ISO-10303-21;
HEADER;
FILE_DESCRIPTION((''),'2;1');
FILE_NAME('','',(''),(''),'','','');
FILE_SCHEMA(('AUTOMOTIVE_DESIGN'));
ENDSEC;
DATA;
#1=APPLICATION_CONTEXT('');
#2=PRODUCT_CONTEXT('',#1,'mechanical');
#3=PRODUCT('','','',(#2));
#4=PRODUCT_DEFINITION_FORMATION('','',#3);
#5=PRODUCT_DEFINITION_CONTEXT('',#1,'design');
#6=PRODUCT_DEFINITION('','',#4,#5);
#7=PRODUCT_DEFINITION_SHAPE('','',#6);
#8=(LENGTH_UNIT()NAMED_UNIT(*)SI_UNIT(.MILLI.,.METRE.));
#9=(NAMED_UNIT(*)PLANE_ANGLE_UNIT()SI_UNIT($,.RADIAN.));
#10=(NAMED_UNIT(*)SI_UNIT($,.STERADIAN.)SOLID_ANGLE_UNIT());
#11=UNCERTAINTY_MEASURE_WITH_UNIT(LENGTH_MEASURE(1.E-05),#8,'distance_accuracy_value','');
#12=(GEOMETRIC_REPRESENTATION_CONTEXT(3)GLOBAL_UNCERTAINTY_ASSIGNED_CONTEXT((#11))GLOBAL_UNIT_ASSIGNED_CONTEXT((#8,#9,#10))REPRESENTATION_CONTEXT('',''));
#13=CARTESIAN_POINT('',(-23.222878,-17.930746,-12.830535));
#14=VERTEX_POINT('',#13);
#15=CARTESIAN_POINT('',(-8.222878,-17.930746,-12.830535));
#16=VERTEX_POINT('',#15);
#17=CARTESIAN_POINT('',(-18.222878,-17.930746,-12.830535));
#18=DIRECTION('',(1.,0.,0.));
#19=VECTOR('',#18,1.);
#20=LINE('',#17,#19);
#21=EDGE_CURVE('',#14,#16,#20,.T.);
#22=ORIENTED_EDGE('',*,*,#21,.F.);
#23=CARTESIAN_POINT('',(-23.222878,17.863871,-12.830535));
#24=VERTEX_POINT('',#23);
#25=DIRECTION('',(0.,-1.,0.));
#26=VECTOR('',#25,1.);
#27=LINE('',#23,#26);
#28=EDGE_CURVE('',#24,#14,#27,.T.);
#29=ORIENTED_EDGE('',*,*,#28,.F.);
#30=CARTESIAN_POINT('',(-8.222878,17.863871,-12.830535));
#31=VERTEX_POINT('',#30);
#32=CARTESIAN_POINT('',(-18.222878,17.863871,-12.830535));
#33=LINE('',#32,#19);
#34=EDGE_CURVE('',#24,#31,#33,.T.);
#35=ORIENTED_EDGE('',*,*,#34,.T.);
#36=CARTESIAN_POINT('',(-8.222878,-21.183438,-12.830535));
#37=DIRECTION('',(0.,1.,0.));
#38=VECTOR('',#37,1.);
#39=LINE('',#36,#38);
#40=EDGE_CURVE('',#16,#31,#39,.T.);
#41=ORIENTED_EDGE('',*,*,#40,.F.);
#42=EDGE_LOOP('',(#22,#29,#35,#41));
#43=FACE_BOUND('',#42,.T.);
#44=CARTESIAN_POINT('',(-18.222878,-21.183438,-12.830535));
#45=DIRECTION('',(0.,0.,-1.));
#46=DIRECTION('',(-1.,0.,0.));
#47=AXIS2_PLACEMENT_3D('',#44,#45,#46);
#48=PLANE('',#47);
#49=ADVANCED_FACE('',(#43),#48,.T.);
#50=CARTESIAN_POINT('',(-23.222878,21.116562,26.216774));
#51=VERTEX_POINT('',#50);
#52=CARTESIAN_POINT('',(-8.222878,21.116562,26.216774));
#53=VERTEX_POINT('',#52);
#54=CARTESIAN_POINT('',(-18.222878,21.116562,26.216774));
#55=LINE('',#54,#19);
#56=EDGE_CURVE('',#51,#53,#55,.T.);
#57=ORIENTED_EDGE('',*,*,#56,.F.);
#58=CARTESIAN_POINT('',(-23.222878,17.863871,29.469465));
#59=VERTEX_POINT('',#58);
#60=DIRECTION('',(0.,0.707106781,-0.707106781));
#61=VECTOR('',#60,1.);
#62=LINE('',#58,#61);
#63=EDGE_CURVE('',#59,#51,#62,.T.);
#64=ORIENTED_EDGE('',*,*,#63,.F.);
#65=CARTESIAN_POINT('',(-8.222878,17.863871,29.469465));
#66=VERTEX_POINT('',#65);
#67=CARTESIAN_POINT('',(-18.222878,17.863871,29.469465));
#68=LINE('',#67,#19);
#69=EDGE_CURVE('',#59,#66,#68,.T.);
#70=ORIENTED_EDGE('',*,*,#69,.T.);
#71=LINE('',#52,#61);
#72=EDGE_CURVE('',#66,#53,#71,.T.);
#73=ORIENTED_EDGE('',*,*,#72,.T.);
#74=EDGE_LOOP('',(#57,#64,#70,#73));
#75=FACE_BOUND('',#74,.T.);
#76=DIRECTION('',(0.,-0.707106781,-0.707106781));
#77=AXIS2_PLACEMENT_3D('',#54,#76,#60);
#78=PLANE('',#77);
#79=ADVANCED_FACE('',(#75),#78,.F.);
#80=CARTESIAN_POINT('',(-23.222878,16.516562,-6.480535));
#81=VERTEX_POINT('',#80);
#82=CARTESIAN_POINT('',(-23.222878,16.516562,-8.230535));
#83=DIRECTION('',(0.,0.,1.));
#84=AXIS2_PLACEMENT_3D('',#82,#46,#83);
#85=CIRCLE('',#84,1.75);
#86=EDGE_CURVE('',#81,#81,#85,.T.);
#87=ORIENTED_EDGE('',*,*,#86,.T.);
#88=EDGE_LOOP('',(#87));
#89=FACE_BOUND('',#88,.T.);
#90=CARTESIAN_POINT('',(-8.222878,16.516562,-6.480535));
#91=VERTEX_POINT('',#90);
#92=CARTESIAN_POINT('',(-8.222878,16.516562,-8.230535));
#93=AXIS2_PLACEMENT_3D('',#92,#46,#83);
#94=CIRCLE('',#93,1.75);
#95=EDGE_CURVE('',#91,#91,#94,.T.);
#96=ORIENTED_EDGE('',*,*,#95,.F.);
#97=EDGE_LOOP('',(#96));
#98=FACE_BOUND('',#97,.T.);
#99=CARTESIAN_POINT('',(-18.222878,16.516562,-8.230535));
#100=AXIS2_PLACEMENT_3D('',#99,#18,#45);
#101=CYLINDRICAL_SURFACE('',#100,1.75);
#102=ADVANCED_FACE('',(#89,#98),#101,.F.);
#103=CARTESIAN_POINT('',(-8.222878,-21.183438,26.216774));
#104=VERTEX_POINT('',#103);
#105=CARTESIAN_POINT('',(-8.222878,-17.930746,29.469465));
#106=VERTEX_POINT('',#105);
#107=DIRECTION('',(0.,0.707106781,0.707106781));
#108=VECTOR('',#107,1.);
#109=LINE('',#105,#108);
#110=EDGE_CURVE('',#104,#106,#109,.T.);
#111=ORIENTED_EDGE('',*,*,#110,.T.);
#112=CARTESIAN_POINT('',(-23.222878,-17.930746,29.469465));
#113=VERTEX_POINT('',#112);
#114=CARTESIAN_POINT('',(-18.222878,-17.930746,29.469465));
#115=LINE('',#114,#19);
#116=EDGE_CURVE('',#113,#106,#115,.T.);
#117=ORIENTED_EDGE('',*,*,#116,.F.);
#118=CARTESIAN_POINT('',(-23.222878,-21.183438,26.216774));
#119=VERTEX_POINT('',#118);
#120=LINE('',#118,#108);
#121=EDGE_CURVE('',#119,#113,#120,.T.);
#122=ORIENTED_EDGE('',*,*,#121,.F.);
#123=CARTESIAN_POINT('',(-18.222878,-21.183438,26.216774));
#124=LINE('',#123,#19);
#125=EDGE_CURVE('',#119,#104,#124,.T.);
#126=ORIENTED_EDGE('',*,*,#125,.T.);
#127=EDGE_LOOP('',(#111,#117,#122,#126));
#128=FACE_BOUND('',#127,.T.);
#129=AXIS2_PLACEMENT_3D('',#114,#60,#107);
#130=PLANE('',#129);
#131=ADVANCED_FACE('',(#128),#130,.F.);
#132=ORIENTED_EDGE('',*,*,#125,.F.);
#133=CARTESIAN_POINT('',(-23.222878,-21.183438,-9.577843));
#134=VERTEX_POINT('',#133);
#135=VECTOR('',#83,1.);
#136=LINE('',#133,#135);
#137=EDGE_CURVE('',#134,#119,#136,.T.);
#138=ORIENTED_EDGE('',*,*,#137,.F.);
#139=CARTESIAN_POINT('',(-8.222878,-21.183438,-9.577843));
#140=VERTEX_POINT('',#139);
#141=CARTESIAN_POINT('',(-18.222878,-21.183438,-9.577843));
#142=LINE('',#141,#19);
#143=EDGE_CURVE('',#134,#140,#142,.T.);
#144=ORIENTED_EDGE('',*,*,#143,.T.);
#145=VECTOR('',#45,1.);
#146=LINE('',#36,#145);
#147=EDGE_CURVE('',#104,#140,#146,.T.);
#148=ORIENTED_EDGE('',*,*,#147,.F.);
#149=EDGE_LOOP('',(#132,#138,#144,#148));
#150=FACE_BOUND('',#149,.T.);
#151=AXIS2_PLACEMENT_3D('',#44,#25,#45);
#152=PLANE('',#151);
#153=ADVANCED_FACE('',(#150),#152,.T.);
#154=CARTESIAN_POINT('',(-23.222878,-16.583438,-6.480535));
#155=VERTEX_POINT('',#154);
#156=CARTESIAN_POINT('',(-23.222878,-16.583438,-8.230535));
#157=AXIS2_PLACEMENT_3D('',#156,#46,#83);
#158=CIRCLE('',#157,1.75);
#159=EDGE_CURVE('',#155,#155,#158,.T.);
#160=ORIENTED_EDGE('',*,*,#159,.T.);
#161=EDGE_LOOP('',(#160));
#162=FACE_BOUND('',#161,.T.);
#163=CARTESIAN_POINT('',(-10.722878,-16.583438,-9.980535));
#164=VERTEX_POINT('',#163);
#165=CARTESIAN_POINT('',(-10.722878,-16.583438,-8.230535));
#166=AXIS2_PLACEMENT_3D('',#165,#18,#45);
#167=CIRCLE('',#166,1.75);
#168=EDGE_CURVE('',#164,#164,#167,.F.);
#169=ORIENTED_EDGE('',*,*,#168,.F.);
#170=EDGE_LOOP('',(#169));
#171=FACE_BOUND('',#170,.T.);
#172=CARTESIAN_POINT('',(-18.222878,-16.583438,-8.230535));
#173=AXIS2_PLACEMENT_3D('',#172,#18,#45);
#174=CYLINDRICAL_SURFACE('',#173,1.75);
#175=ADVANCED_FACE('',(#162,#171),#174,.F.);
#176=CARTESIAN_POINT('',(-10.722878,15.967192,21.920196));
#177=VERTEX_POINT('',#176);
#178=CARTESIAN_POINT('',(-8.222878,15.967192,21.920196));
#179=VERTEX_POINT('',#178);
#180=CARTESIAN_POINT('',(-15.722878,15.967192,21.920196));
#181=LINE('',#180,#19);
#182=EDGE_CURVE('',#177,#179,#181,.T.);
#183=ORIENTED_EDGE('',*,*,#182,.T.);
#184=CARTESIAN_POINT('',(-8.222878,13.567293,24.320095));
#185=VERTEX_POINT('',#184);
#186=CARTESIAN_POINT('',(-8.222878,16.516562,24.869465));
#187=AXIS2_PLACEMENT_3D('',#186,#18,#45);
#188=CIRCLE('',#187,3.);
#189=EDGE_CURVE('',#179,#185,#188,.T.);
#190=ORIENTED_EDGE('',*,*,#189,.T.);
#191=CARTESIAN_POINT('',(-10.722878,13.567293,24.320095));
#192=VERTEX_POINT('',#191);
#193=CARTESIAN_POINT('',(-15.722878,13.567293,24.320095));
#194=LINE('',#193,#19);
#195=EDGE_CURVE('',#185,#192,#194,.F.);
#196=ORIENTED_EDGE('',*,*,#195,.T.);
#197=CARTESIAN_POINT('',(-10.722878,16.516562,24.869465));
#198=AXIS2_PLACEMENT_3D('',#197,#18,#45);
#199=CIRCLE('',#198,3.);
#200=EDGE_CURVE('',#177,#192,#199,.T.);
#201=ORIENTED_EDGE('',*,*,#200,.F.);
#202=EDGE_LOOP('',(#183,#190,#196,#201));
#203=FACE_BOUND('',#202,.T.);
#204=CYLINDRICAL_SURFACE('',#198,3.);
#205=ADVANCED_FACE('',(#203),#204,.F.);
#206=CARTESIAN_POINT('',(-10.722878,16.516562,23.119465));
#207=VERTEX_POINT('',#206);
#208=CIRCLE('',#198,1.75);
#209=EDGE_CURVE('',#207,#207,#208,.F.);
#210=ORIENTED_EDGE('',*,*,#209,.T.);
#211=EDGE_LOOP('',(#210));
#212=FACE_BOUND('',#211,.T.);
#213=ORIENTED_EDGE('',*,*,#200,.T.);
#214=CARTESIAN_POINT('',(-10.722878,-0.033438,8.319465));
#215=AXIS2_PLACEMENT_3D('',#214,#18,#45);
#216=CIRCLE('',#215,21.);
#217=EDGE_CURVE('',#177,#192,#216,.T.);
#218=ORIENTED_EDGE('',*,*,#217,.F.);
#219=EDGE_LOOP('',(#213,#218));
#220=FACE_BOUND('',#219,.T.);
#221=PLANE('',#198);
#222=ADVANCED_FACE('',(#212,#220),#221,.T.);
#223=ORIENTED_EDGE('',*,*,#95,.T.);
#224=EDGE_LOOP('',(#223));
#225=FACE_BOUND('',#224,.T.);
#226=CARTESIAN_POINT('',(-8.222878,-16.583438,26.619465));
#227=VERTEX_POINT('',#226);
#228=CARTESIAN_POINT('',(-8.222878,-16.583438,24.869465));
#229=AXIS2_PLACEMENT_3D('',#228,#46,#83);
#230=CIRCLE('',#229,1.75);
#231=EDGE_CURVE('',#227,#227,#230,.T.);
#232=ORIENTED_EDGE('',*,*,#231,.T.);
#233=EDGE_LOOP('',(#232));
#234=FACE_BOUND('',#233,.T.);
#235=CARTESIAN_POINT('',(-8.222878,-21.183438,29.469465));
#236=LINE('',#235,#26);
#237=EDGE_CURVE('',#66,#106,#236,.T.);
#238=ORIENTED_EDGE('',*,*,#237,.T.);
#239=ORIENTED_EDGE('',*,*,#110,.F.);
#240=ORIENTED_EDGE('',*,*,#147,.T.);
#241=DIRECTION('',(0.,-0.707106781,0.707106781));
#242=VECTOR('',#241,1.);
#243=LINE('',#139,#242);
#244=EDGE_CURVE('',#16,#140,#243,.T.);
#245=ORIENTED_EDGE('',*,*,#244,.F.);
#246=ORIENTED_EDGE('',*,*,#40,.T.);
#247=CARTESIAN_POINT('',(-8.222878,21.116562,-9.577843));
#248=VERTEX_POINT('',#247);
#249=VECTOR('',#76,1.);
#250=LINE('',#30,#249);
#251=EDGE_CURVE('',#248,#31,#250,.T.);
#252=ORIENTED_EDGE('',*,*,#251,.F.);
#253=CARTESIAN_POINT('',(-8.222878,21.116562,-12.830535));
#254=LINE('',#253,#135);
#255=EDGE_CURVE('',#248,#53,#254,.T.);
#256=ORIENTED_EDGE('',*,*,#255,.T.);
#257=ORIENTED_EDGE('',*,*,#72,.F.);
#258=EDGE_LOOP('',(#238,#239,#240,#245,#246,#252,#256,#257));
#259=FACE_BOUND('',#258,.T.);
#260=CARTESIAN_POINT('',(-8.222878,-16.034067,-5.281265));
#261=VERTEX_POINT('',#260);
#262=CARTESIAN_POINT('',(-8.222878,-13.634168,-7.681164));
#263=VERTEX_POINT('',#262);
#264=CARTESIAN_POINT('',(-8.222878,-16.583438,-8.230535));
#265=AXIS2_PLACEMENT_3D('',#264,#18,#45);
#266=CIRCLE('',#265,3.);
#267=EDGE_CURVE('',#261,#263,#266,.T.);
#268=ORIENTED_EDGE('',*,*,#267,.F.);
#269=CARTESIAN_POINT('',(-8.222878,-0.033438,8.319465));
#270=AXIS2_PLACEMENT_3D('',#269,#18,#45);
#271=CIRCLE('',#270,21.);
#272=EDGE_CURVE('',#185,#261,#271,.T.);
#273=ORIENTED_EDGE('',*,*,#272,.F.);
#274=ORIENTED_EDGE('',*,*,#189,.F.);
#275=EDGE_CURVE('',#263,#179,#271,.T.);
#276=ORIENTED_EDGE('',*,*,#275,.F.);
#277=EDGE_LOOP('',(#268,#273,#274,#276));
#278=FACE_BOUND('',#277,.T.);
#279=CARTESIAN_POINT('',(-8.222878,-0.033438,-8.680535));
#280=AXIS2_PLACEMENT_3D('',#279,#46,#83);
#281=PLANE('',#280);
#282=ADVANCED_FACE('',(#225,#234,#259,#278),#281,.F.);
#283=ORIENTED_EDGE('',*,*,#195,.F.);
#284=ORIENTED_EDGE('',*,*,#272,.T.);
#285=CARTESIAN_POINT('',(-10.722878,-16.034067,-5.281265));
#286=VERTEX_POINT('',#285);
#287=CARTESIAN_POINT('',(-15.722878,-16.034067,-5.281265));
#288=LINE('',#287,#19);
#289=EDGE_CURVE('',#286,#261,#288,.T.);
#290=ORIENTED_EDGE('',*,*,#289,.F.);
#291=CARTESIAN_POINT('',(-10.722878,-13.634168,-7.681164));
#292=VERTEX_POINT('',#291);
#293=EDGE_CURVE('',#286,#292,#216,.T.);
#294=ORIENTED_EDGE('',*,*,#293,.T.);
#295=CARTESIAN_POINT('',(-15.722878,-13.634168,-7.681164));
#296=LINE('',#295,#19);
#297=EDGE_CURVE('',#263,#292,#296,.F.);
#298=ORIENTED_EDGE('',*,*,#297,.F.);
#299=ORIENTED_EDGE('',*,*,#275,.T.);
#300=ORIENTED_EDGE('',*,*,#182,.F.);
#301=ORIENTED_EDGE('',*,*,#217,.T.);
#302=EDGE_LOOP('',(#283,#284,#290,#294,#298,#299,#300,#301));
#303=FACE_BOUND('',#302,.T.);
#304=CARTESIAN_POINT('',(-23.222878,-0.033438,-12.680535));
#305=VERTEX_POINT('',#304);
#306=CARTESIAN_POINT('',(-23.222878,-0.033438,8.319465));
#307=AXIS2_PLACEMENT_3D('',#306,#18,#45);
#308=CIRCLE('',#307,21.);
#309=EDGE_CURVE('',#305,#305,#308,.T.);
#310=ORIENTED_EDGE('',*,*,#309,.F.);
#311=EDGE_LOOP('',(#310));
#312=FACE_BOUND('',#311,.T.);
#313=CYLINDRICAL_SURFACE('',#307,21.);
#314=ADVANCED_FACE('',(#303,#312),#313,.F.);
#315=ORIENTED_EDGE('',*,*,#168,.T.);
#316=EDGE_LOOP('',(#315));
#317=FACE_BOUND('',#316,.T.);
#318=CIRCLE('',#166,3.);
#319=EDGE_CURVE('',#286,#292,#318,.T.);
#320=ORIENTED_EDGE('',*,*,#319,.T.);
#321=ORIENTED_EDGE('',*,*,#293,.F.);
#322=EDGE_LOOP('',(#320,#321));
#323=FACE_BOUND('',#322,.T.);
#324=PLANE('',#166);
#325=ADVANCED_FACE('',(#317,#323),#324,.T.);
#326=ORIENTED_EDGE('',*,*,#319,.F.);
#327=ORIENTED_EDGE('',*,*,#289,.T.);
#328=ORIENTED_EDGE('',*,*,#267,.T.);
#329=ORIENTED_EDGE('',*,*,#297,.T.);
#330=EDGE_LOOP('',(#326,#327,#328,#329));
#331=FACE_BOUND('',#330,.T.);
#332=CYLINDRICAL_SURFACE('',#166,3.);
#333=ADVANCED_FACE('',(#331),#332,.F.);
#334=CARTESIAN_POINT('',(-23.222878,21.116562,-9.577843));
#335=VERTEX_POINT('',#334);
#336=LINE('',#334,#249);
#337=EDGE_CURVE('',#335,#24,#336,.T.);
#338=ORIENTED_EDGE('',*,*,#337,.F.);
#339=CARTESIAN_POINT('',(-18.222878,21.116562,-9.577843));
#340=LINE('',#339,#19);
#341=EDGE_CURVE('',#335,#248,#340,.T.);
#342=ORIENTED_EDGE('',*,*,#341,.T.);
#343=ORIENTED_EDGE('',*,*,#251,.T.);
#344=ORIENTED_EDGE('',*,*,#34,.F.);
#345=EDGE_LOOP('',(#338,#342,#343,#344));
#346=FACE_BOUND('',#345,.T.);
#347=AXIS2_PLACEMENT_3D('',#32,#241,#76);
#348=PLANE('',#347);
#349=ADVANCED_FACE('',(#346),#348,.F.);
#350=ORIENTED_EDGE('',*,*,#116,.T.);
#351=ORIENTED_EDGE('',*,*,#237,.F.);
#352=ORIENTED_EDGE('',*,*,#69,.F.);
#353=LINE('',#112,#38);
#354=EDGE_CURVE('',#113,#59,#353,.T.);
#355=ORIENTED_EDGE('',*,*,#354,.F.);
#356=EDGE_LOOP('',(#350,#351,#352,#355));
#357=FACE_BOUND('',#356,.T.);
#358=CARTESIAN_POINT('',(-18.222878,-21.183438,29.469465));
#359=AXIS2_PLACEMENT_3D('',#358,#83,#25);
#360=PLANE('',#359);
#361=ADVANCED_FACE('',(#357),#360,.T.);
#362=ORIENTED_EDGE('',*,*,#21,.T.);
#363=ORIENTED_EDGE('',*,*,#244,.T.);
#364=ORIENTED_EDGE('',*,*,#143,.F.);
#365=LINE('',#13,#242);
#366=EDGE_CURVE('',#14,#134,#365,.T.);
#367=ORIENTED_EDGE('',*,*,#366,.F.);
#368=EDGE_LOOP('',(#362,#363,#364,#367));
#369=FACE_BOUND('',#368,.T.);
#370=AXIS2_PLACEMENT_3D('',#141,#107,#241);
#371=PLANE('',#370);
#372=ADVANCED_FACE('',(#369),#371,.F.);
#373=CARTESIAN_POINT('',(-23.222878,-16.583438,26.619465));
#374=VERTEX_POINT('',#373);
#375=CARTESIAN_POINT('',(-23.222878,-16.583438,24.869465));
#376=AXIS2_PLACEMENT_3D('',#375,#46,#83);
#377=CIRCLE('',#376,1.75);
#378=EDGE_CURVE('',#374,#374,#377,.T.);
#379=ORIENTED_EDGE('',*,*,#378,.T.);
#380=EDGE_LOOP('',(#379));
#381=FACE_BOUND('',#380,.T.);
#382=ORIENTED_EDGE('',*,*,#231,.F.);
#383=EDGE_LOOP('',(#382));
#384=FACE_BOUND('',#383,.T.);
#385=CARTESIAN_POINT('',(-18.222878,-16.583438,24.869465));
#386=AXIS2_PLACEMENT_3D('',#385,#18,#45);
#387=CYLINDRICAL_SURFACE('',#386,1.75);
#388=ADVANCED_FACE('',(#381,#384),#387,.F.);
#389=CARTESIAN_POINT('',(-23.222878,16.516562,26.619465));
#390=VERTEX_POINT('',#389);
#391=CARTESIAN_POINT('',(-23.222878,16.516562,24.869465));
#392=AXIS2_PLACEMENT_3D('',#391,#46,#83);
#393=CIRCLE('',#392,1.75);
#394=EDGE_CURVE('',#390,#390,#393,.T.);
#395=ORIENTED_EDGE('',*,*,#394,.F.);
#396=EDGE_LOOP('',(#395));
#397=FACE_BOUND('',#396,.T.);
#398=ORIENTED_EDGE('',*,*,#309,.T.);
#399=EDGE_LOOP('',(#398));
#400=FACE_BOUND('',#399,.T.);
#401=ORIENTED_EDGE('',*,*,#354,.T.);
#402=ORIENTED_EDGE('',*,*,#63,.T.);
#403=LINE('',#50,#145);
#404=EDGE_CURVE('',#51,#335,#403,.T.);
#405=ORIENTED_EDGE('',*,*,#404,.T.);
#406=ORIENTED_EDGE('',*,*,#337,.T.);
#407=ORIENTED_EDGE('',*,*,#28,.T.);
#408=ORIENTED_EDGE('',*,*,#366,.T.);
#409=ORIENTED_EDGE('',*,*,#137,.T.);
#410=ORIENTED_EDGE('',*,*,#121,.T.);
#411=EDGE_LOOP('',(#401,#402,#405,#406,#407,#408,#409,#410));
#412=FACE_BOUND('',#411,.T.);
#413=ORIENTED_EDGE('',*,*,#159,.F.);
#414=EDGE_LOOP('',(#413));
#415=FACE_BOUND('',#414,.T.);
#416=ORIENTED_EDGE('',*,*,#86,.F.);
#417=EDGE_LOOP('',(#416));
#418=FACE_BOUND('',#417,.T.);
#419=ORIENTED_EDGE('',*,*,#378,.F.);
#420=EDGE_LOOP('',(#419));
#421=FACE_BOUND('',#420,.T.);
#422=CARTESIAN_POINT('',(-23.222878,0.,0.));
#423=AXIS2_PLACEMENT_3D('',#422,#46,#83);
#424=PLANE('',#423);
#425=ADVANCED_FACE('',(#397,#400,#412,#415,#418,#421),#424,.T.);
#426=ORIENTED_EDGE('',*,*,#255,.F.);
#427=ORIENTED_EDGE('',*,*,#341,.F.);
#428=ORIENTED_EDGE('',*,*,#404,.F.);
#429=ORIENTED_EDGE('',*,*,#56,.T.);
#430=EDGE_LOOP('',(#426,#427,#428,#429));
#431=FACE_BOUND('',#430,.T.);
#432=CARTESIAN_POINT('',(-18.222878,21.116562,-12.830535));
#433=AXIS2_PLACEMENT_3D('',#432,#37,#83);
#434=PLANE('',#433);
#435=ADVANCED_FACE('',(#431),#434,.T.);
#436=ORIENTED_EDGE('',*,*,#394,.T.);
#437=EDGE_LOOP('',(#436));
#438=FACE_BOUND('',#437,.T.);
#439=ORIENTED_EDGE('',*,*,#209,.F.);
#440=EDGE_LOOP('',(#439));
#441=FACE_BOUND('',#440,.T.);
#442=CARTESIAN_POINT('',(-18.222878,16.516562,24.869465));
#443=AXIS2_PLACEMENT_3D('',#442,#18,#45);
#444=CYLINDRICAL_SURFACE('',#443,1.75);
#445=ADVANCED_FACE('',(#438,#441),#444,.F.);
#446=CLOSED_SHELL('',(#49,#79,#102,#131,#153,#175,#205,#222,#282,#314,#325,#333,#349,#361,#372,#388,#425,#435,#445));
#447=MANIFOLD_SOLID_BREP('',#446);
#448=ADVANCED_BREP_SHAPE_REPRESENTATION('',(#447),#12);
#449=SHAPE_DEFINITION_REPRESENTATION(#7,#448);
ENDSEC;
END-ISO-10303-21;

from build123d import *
from build123d.topology import SkipClean

# Parameters (mm, degrees)
BOSS_EXTRUDE1_START     = -10
BOSS_EXTRUDE1_OUTLINE_W = 42.3
BOSS_EXTRUDE1_OUTLINE_H = 42.3
BOSS_EXTRUDE1_DEPTH     = 10
CUT_EXTRUDE1_DEPTH      = 38.645549687
CUT_EXTRUDE1_DEPTH_BACK = 38.645549687
SKETCH2_R               = 1.75
CUT_EXTRUDE2_DEPTH      = 38.645549687
SKETCH4_R               = 18.5
SKETCH4_R_2             = 1.75
BOSS_EXTRUDE2_DEPTH     = 5
SKETCH5_R               = 3
CUT_EXTRUDE3_DEPTH      = 2.5
SKETCH6_R               = 21
CUT_EXTRUDE4_DEPTH      = 40.27069405


with BuildPart() as part:
    # Boss-Extrude1: read off the stored shape, not the designer's step
    # Boss-Extrude1 outline → Boss-Extrude1 (new body)
    with BuildSketch(Plane(origin=(-8.22287786, 0, 0), x_dir=(0, 0, -1), z_dir=(1, 0, 0)).offset(BOSS_EXTRUDE1_START)):
        with Locations((-8.319465315, -0.033437522)):
            Rectangle(BOSS_EXTRUDE1_OUTLINE_W, BOSS_EXTRUDE1_OUTLINE_H)
        with BuildLine():
            ThreePointArc((-8.140312225, 18.091677103), (-7.905501659, 17.531132097), (-7.710167137, 16.95564002))
            ThreePointArc((-7.710167137, 16.95564002), (-7.556763199, 16.949444609), (-7.403421467, 16.941864056))
            ThreePointArc((-7.403421467, 16.941864056), (-7.157286592, 17.497529719), (-6.873174438, 18.034769879))
            ThreePointArc((-6.873174438, 18.034769879), (-6.694663202, 18.019592531), (-6.516310694, 18.002651561))
            ThreePointArc((-6.516310694, 18.002651561), (-6.332692274, 17.423314887), (-6.189730822, 16.832629921))
            ThreePointArc((-6.189730822, 16.832629921), (-6.037499796, 16.812708428), (-5.885454889, 16.791412945))
            ThreePointArc((-5.885454889, 16.791412945), (-5.590501394, 17.322778302), (-5.259375155, 17.832388074))
            ThreePointArc((-5.259375155, 17.832388074), (-5.08294304, 17.801270201), (-4.906827104, 17.768410035))
            ThreePointArc((-4.906827104, 17.768410035), (-4.775879216, 17.174946172), (-4.686441878, 16.573824164))
            ThreePointArc((-4.686441878, 16.573824164), (-4.536609438, 16.540336985), (-4.387085531, 16.505498031))
            ThreePointArc((-4.387085531, 16.505498031), (-4.045688209, 17.008284839), (-3.670213919, 17.486161145))
            ThreePointArc((-3.670213919, 17.486161145), (-3.497281452, 17.439353291), (-3.32482007, 17.390838499))
            ThreePointArc((-3.32482007, 17.390838499), (-3.24759703, 16.788025669), (-3.212403902, 16.181306501))
            ThreePointArc((-3.212403902, 16.181306501), (-3.066176411, 16.134523255), (-2.920377383, 16.086421333))
            ThreePointArc((-2.920377383, 16.086421333), (-2.535284964, 16.556581449), (-2.118485721, 16.998876709))
            ThreePointArc((-2.118485721, 16.998876709), (-1.950445253, 16.936755743), (-1.783026982, 16.872976939))
            ThreePointArc((-1.783026982, 16.872976939), (-1.760150546, 16.265668636), (-1.779484981, 15.658237253))
            ThreePointArc((-1.779484981, 15.658237253), (-1.638039777, 15.598534611), (-1.497139516, 15.537557009))
            ThreePointArc((-1.497139516, 15.537557009), (-1.071452538, 15.971304981), (-0.616684165, 16.374458094))
            ThreePointArc((-0.616684165, 16.374458094), (-0.454888659, 16.297524177), (-0.293861453, 16.21899487))
            ThreePointArc((-0.293861453, 16.21899487), (-0.325515807, 15.612080784), (-0.399222137, 15.008827866))
            ThreePointArc((-0.399222137, 15.008827866), (-0.263698053, 14.936686519), (-0.128831005, 14.863324193))
            ThreePointArc((-0.128831005, 14.863324193), (0.33402315, 15.257167737), (0.823099126, 15.617932752))
            ThreePointArc((0.823099126, 15.617932752), (0.977346988, 15.526805311), (1.130686633, 15.434157772))
            ThreePointArc((1.130686633, 15.434157772), (1.044756351, 14.832524418), (0.917271566, 14.238307003))
            ThreePointArc((0.917271566, 14.238307003), (1.04578337, 14.154307791), (1.173531334, 14.069151411))
            ThreePointArc((1.173531334, 14.069151411), (1.669826038, 14.41991953), (2.189271864, 14.735391778))
            ThreePointArc((2.189271864, 14.735391778), (2.334730168, 14.630804518), (2.479147652, 14.524784691))
            ThreePointArc((2.479147652, 14.524784691), (2.339633302, 13.933276067), (2.159396495, 13.352878445))
            ThreePointArc((2.159396495, 13.352878445), (2.279861317, 13.25769768), (2.399461646, 13.161432875))
            ThreePointArc((2.399461646, 13.161432875), (2.925201025, 13.46630139), (3.47083443, 13.733940875))
            ThreePointArc((3.47083443, 13.733940875), (3.606332032, 13.616735871), (3.740664589, 13.498197365))
            ThreePointArc((3.740664589, 13.498197365), (3.548689459, 12.921575951), (3.31715179, 12.359671142))
            ThreePointArc((3.31715179, 12.359671142), (3.428599718, 12.254075163), (3.539089461, 12.147477001))
            ThreePointArc((3.539089461, 12.147477001), (4.090040571, 12.403991291), (4.657468434, 12.621643137))
            ThreePointArc((4.657468434, 12.621643137), (4.781914387, 12.492764053), (4.905080451, 12.362661271))
            ThreePointArc((4.905080451, 12.362661271), (4.662190211, 11.805569683), (4.381215887, 11.266681815))
            ThreePointArc((4.381215887, 11.266681815), (4.482749607, 11.151520819), (4.583239166, 11.035447566))
            ThreePointArc((4.583239166, 11.035447566), (5.154966072, 11.241542328), (5.739619798, 11.40745413))
            ThreePointArc((5.739619798, 11.40745413), (5.852012136, 11.267938627), (5.963020047, 11.127319079))
            ThreePointArc((5.963020047, 11.127319079), (5.671170307, 10.594242691), (5.343021566, 10.082710571))
            ThreePointArc((5.343021566, 10.082710571), (5.43382359, 9.958911767), (5.52350388, 9.834297976))
            ThreePointArc((5.52350388, 9.834297976), (6.111403374, 9.988313856), (6.708575676, 10.10114979))
            ThreePointArc((6.708575676, 10.10114979), (6.808009482, 9.952121164), (6.905965468, 9.802117037))
            ThreePointArc((6.905965468, 9.802117037), (6.56750603, 9.297347867), (6.194824934, 8.817290051))
            ThreePointArc((6.194824934, 8.817290051), (6.274164177, 8.685850194), (6.352313147, 8.553699182))
            ThreePointArc((6.352313147, 8.553699182), (6.951651807, 8.654396135), (7.556534604, 8.713247712))
            ThreePointArc((7.556534604, 8.713247712), (7.642209296, 8.555905854), (7.726324673, 8.397724892))
            ThreePointArc((7.726324673, 8.397724892), (7.343980614, 7.925327045), (6.929767772, 7.480608677))
            ThreePointArc((6.929767772, 7.480608677), (6.99700544, 7.342586043), (7.06299388, 7.203961813))
            ThreePointArc((7.06299388, 7.203961813), (7.668946184, 7.250529086), (8.276669315, 7.254922468))
            ThreePointArc((8.276669315, 7.254922468), (8.347895091, 7.090534202), (8.417492612, 6.925449986))
            ThreePointArc((8.417492612, 6.925449986), (7.994342341, 6.48922693), (7.541932751, 6.08342862))
            ThreePointArc((7.541932751, 6.08342862), (7.596527486, 5.939934487), (7.649824096, 5.795953159))
            ThreePointArc((7.649824096, 5.795953159), (8.257511273, 5.788015821), (8.863181709, 5.737915635))
            ThreePointArc((8.863181709, 5.737915635), (8.9193851, 5.567804518), (8.973904407, 5.397146209))
            ThreePointArc((8.973904407, 5.397146209), (8.513354882, 5.000610157), (8.026391079, 4.636999155))
            ThreePointArc((8.026391079, 4.636999155), (8.067903317, 4.489188853), (8.108078984, 4.34100968))
            ThreePointArc((8.108078984, 4.34100968), (8.712608293, 4.278631636), (9.311349532, 4.17444126))
            ThreePointArc((9.311349532, 4.17444126), (9.352078022, 3.999976927), (9.391080158, 3.825118565))
            ThreePointArc((9.391080158, 3.825118565), (8.896839451, 3.471462192), (8.379242183, 3.152966079))
            ThreePointArc((8.379242183, 3.152966079), (8.407337692, 3.00202969), (8.434068944, 2.850845724))
            ThreePointArc((8.434068944, 2.850845724), (9.030573071, 2.734529206), (9.617564401, 2.577087519))
            ThreePointArc((9.617564401, 2.577087519), (9.642490067, 2.399674654), (9.665661009, 2.222024096))
            ThreePointArc((9.665661009, 2.222024096), (9.141708458, 1.914094835), (8.597645113, 1.643277956))
            ThreePointArc((8.597645113, 1.643277956), (8.612097683, 1.49043073), (8.625169297, 1.337459215))
            ThreePointArc((8.625169297, 1.337459215), (9.208845542, 1.168140735), (9.779360853, 0.958715365))
            ThreePointArc((9.779360853, 0.958715365), (9.788283009, 0.779782393), (9.795436199, 0.600769976))
            ThreePointArc((9.795436199, 0.600769976), (9.24599036, 0.341047093), (8.679841416, 0.120089905))
            ThreePointArc((8.679841416, 0.120089905), (8.680534685, -0.033437522), (8.679841416, -0.186964949))
            ThreePointArc((8.679841416, -0.186964949), (9.24599036, -0.407922137), (9.795436199, -0.667645021))
            ThreePointArc((9.795436199, -0.667645021), (9.788283009, -0.846657437), (9.779360853, -1.025590409))
            ThreePointArc((9.779360853, -1.025590409), (9.208845542, -1.23501578), (8.625169297, -1.404334259))
            ThreePointArc((8.625169297, -1.404334259), (8.612097683, -1.557305774), (8.597645113, -1.710153))
            ThreePointArc((8.597645113, -1.710153), (9.141708458, -1.980969879), (9.665661009, -2.28889914))
            ThreePointArc((9.665661009, -2.28889914), (9.642490067, -2.466549698), (9.617564401, -2.643962563))
            ThreePointArc((9.617564401, -2.643962563), (9.030573071, -2.80140425), (8.434068944, -2.917720768))
            ThreePointArc((8.434068944, -2.917720768), (8.407337692, -3.068904734), (8.379242183, -3.219841124))
            ThreePointArc((8.379242183, -3.219841124), (8.896839451, -3.538337236), (9.391080158, -3.891993609))
            ThreePointArc((9.391080158, -3.891993609), (9.352078022, -4.066851971), (9.311349532, -4.241316304))
            ThreePointArc((9.311349532, -4.241316304), (8.712608293, -4.34550668), (8.108078984, -4.407884724))
            ThreePointArc((8.108078984, -4.407884724), (8.067903317, -4.556063897), (8.026391079, -4.703874199))
            ThreePointArc((8.026391079, -4.703874199), (8.513354882, -5.067485201), (8.973904407, -5.464021253))
            ThreePointArc((8.973904407, -5.464021253), (8.9193851, -5.634679562), (8.863181709, -5.804790679))
            ThreePointArc((8.863181709, -5.804790679), (8.257511273, -5.854890865), (7.649824096, -5.862828204))
            ThreePointArc((7.649824096, -5.862828204), (7.596527486, -6.006809532), (7.541932751, -6.150303665))
            ThreePointArc((7.541932751, -6.150303665), (7.994342341, -6.556101975), (8.417492612, -6.99232503))
            ThreePointArc((8.417492612, -6.99232503), (8.347895091, -7.157409246), (8.276669315, -7.321797513))
            ThreePointArc((8.276669315, -7.321797513), (7.668946184, -7.31740413), (7.06299388, -7.270836857))
            ThreePointArc((7.06299388, -7.270836857), (6.99700544, -7.409461087), (6.929767772, -7.547483721))
            ThreePointArc((6.929767772, -7.547483721), (7.343980614, -7.992202089), (7.726324673, -8.464599937))
            ThreePointArc((7.726324673, -8.464599937), (7.642209296, -8.622780898), (7.556534604, -8.780122757))
            ThreePointArc((7.556534604, -8.780122757), (6.951651807, -8.721271179), (6.352313147, -8.620574226))
            ThreePointArc((6.352313147, -8.620574226), (6.274164177, -8.752725238), (6.194824934, -8.884165095))
            ThreePointArc((6.194824934, -8.884165095), (6.56750603, -9.364222911), (6.905965468, -9.868992081))
            ThreePointArc((6.905965468, -9.868992081), (6.808009482, -10.018996208), (6.708575676, -10.168024834))
            ThreePointArc((6.708575676, -10.168024834), (6.111403374, -10.0551889), (5.52350388, -9.90117302))
            ThreePointArc((5.52350388, -9.90117302), (5.43382359, -10.025786811), (5.343021566, -10.149585615))
            ThreePointArc((5.343021566, -10.149585615), (5.671170307, -10.661117735), (5.963020047, -11.194194123))
            ThreePointArc((5.963020047, -11.194194123), (5.852012137, -11.334813671), (5.739619798, -11.474329174))
            ThreePointArc((5.739619798, -11.474329174), (5.154966072, -11.308417372), (4.583239166, -11.10232261))
            ThreePointArc((4.583239166, -11.10232261), (4.482749607, -11.218395863), (4.381215887, -11.333556859))
            ThreePointArc((4.381215887, -11.333556859), (4.662190211, -11.872444727), (4.905080451, -12.429536315))
            ThreePointArc((4.905080451, -12.429536315), (4.781914387, -12.559639098), (4.657468434, -12.688518181))
            ThreePointArc((4.657468434, -12.688518181), (4.090040571, -12.470866335), (3.539089461, -12.214352046))
            ThreePointArc((3.539089461, -12.214352046), (3.428599718, -12.320950207), (3.31715179, -12.426546186))
            ThreePointArc((3.31715179, -12.426546186), (3.548689459, -12.988450995), (3.740664589, -13.565072409))
            ThreePointArc((3.740664589, -13.565072409), (3.606332032, -13.683610915), (3.47083443, -13.80081592))
            ThreePointArc((3.47083443, -13.80081592), (2.925201025, -13.533176435), (2.399461646, -13.22830792))
            ThreePointArc((2.399461646, -13.22830792), (2.279861317, -13.324572724), (2.159396495, -13.419753489))
            ThreePointArc((2.159396495, -13.419753489), (2.339633302, -14.000151111), (2.479147652, -14.591659735))
            ThreePointArc((2.479147652, -14.591659735), (2.334730168, -14.697679562), (2.189271864, -14.802266823))
            ThreePointArc((2.189271864, -14.802266823), (1.669826038, -14.486794574), (1.173531334, -14.136026456))
            ThreePointArc((1.173531334, -14.136026456), (1.04578337, -14.221182835), (0.917271566, -14.305182047))
            ThreePointArc((0.917271566, -14.305182047), (1.044756351, -14.899399462), (1.130686633, -15.501032816))
            ThreePointArc((1.130686633, -15.501032816), (0.977346988, -15.593680355), (0.823099126, -15.684807796))
            ThreePointArc((0.823099126, -15.684807796), (0.33402315, -15.324042781), (-0.128831005, -14.930199238))
            ThreePointArc((-0.128831005, -14.930199238), (-0.263698052, -15.003561564), (-0.399222137, -15.07570291))
            ThreePointArc((-0.399222137, -15.07570291), (-0.325515807, -15.678955828), (-0.293861453, -16.285869914))
            ThreePointArc((-0.293861453, -16.285869914), (-0.454888659, -16.364399222), (-0.616684165, -16.441333139))
            ThreePointArc((-0.616684165, -16.441333139), (-1.071452538, -16.038180025), (-1.497139516, -15.604432053))
            ThreePointArc((-1.497139516, -15.604432053), (-1.638039777, -15.665409655), (-1.779484981, -15.725112297))
            ThreePointArc((-1.779484981, -15.725112297), (-1.760150546, -16.33254368), (-1.783026982, -16.939851983))
            ThreePointArc((-1.783026982, -16.939851983), (-1.950445253, -17.003630787), (-2.118485721, -17.065751754))
            ThreePointArc((-2.118485721, -17.065751754), (-2.535284964, -16.623456494), (-2.920377383, -16.153296377))
            ThreePointArc((-2.920377383, -16.153296377), (-3.066176411, -16.201398299), (-3.212403902, -16.248181545))
            ThreePointArc((-3.212403902, -16.248181545), (-3.24759703, -16.854900714), (-3.32482007, -17.457713544))
            ThreePointArc((-3.32482007, -17.457713544), (-3.497281452, -17.506228335), (-3.670213919, -17.553036189))
            ThreePointArc((-3.670213919, -17.553036189), (-4.045688209, -17.075159884), (-4.387085531, -16.572373075))
            ThreePointArc((-4.387085531, -16.572373075), (-4.536609438, -16.607212029), (-4.686441878, -16.640699208))
            ThreePointArc((-4.686441878, -16.640699208), (-4.775879216, -17.241821216), (-4.906827104, -17.835285079))
            ThreePointArc((-4.906827104, -17.835285079), (-5.08294304, -17.868145245), (-5.259375155, -17.899263118))
            ThreePointArc((-5.259375155, -17.899263118), (-5.590501394, -17.389653346), (-5.885454889, -16.858287989))
            ThreePointArc((-5.885454889, -16.858287989), (-6.037499796, -16.879583472), (-6.189730822, -16.899504965))
            ThreePointArc((-6.189730822, -16.899504965), (-6.332692274, -17.490189931), (-6.516310694, -18.069526605))
            ThreePointArc((-6.516310694, -18.069526605), (-6.694663202, -18.086467575), (-6.873174438, -18.101644923))
            ThreePointArc((-6.873174438, -18.101644923), (-7.157286592, -17.564404763), (-7.403421467, -17.0087391))
            ThreePointArc((-7.403421467, -17.0087391), (-7.556763199, -17.016319653), (-7.710167137, -17.022515064))
            ThreePointArc((-7.710167137, -17.022515064), (-7.905501659, -17.598007141), (-8.140312225, -18.158552147))
            ThreePointArc((-8.140312225, -18.158552147), (-8.319465315, -18.159437522), (-8.498618404, -18.158552147))
            ThreePointArc((-8.498618404, -18.158552147), (-8.73342897, -17.598007141), (-8.928763492, -17.022515064))
            ThreePointArc((-8.928763492, -17.022515064), (-9.08216743, -17.016319653), (-9.235509162, -17.0087391))
            ThreePointArc((-9.235509162, -17.0087391), (-9.481644037, -17.564404763), (-9.765756192, -18.101644923))
            ThreePointArc((-9.765756192, -18.101644923), (-9.944267428, -18.086467575), (-10.122619935, -18.069526605))
            ThreePointArc((-10.122619935, -18.069526605), (-10.306238356, -17.490189931), (-10.449199807, -16.899504965))
            ThreePointArc((-10.449199807, -16.899504965), (-10.601430834, -16.879583472), (-10.753475741, -16.858287989))
            ThreePointArc((-10.753475741, -16.858287989), (-11.048429235, -17.389653346), (-11.379555474, -17.899263118))
            ThreePointArc((-11.379555474, -17.899263118), (-11.555987589, -17.868145245), (-11.732103525, -17.835285079))
            ThreePointArc((-11.732103525, -17.835285079), (-11.863051413, -17.241821216), (-11.952488751, -16.640699208))
            ThreePointArc((-11.952488751, -16.640699208), (-12.102321192, -16.607212029), (-12.251845099, -16.572373075))
            ThreePointArc((-12.251845099, -16.572373075), (-12.59324242, -17.075159884), (-12.96871671, -17.553036189))
            ThreePointArc((-12.96871671, -17.553036189), (-13.141649177, -17.506228335), (-13.31411056, -17.457713544))
            ThreePointArc((-13.31411056, -17.457713544), (-13.391333599, -16.854900714), (-13.426526727, -16.248181545))
            ThreePointArc((-13.426526727, -16.248181545), (-13.572754219, -16.201398299), (-13.718553247, -16.153296377))
            ThreePointArc((-13.718553247, -16.153296377), (-14.103645665, -16.623456494), (-14.520444908, -17.065751754))
            ThreePointArc((-14.520444908, -17.065751754), (-14.688485376, -17.003630787), (-14.855903647, -16.939851983))
            ThreePointArc((-14.855903647, -16.939851983), (-14.878780084, -16.33254368), (-14.859445648, -15.725112297))
            ThreePointArc((-14.859445648, -15.725112297), (-15.000890853, -15.665409655), (-15.141791113, -15.604432053))
            ThreePointArc((-15.141791113, -15.604432053), (-15.567478091, -16.038180025), (-16.022246464, -16.441333139))
            ThreePointArc((-16.022246464, -16.441333139), (-16.18404197, -16.364399222), (-16.345069176, -16.285869914))
            ThreePointArc((-16.345069176, -16.285869914), (-16.313414823, -15.678955828), (-16.239708492, -15.07570291))
            ThreePointArc((-16.239708492, -15.07570291), (-16.375232577, -15.003561564), (-16.510099624, -14.930199238))
            ThreePointArc((-16.510099624, -14.930199238), (-16.97295378, -15.324042781), (-17.462029755, -15.684807796))
            ThreePointArc((-17.462029755, -15.684807796), (-17.616277617, -15.593680355), (-17.769617262, -15.501032816))
            ThreePointArc((-17.769617262, -15.501032816), (-17.68368698, -14.899399462), (-17.556202195, -14.305182047))
            ThreePointArc((-17.556202195, -14.305182047), (-17.684713999, -14.221182835), (-17.812461963, -14.136026456))
            ThreePointArc((-17.812461963, -14.136026456), (-18.308756667, -14.486794574), (-18.828202493, -14.802266823))
            ThreePointArc((-18.828202493, -14.802266823), (-18.973660797, -14.697679562), (-19.118078281, -14.591659735))
            ThreePointArc((-19.118078281, -14.591659735), (-18.978563932, -14.000151111), (-18.798327124, -13.419753489))
            ThreePointArc((-18.798327124, -13.419753489), (-18.918791946, -13.324572724), (-19.038392276, -13.22830792))
            ThreePointArc((-19.038392276, -13.22830792), (-19.564131655, -13.533176435), (-20.109765059, -13.80081592))
            ThreePointArc((-20.109765059, -13.80081592), (-20.245262661, -13.683610915), (-20.379595218, -13.565072409))
            ThreePointArc((-20.379595218, -13.565072409), (-20.187620088, -12.988450995), (-19.956082419, -12.426546186))
            ThreePointArc((-19.956082419, -12.426546186), (-20.067530347, -12.320950207), (-20.17802009, -12.214352046))
            ThreePointArc((-20.17802009, -12.214352046), (-20.7289712, -12.470866335), (-21.296399063, -12.688518181))
            ThreePointArc((-21.296399063, -12.688518181), (-21.420845016, -12.559639098), (-21.54401108, -12.429536315))
            ThreePointArc((-21.54401108, -12.429536315), (-21.301120841, -11.872444727), (-21.020146516, -11.333556859))
            ThreePointArc((-21.020146516, -11.333556859), (-21.121680237, -11.218395863), (-21.222169795, -11.10232261))
            ThreePointArc((-21.222169795, -11.10232261), (-21.793896701, -11.308417372), (-22.378550428, -11.474329174))
            ThreePointArc((-22.378550428, -11.474329174), (-22.490942766, -11.334813671), (-22.601950676, -11.194194123))
            ThreePointArc((-22.601950676, -11.194194123), (-22.310100936, -10.661117735), (-21.981952195, -10.149585615))
            ThreePointArc((-21.981952195, -10.149585615), (-22.072754219, -10.025786811), (-22.16243451, -9.90117302))
            ThreePointArc((-22.16243451, -9.90117302), (-22.750334003, -10.0551889), (-23.347506305, -10.168024834))
            ThreePointArc((-23.347506305, -10.168024834), (-23.446940112, -10.018996208), (-23.544896097, -9.868992081))
            ThreePointArc((-23.544896097, -9.868992081), (-23.20643666, -9.364222911), (-22.833755564, -8.884165095))
            ThreePointArc((-22.833755564, -8.884165095), (-22.913094806, -8.752725238), (-22.991243776, -8.620574226))
            ThreePointArc((-22.991243776, -8.620574226), (-23.590582436, -8.721271179), (-24.195465233, -8.780122757))
            ThreePointArc((-24.195465233, -8.780122757), (-24.281139925, -8.622780898), (-24.365255303, -8.464599937))
            ThreePointArc((-24.365255303, -8.464599937), (-23.982911244, -7.992202089), (-23.568698401, -7.547483721))
            ThreePointArc((-23.568698401, -7.547483721), (-23.635936069, -7.409461087), (-23.701924509, -7.270836857))
            ThreePointArc((-23.701924509, -7.270836857), (-24.307876813, -7.31740413), (-24.915599944, -7.321797513))
            ThreePointArc((-24.915599944, -7.321797513), (-24.98682572, -7.157409246), (-25.056423242, -6.99232503))
            ThreePointArc((-25.056423242, -6.99232503), (-24.633272971, -6.556101975), (-24.18086338, -6.150303665))
            ThreePointArc((-24.18086338, -6.150303665), (-24.235458116, -6.006809532), (-24.288754725, -5.862828204))
            ThreePointArc((-24.288754725, -5.862828204), (-24.896441902, -5.854890865), (-25.502112338, -5.804790679))
            ThreePointArc((-25.502112338, -5.804790679), (-25.558315729, -5.634679562), (-25.612835037, -5.464021253))
            ThreePointArc((-25.612835037, -5.464021253), (-25.152285511, -5.067485201), (-24.665321708, -4.703874199))
            ThreePointArc((-24.665321708, -4.703874199), (-24.706833946, -4.556063897), (-24.747009613, -4.407884724))
            ThreePointArc((-24.747009613, -4.407884724), (-25.351538922, -4.34550668), (-25.950280161, -4.241316304))
            ThreePointArc((-25.950280161, -4.241316304), (-25.991008651, -4.066851971), (-26.030010787, -3.891993609))
            ThreePointArc((-26.030010787, -3.891993609), (-25.535770081, -3.538337236), (-25.018172812, -3.219841124))
            ThreePointArc((-25.018172812, -3.219841124), (-25.046268321, -3.068904734), (-25.072999573, -2.917720768))
            ThreePointArc((-25.072999573, -2.917720768), (-25.6695037, -2.80140425), (-26.25649503, -2.643962563))
            ThreePointArc((-26.25649503, -2.643962563), (-26.281420696, -2.466549698), (-26.304591639, -2.28889914))
            ThreePointArc((-26.304591639, -2.28889914), (-25.780639087, -1.980969879), (-25.236575742, -1.710153))
            ThreePointArc((-25.236575742, -1.710153), (-25.251028313, -1.557305774), (-25.264099927, -1.404334259))
            ThreePointArc((-25.264099927, -1.404334259), (-25.847776171, -1.23501578), (-26.418291482, -1.025590409))
            ThreePointArc((-26.418291482, -1.025590409), (-26.427213639, -0.846657437), (-26.434366828, -0.667645021))
            ThreePointArc((-26.434366828, -0.667645021), (-25.884920989, -0.407922137), (-25.318772045, -0.186964949))
            ThreePointArc((-25.318772045, -0.186964949), (-25.319465315, -0.033437522), (-25.318772045, 0.120089905))
            ThreePointArc((-25.318772045, 0.120089905), (-25.884920989, 0.341047093), (-26.434366828, 0.600769976))
            ThreePointArc((-26.434366828, 0.600769976), (-26.427213639, 0.779782393), (-26.418291482, 0.958715365))
            ThreePointArc((-26.418291482, 0.958715365), (-25.847776171, 1.168140735), (-25.264099927, 1.337459215))
            ThreePointArc((-25.264099927, 1.337459215), (-25.251028313, 1.49043073), (-25.236575742, 1.643277956))
            ThreePointArc((-25.236575742, 1.643277956), (-25.780639087, 1.914094835), (-26.304591639, 2.222024096))
            ThreePointArc((-26.304591639, 2.222024096), (-26.281420696, 2.399674654), (-26.25649503, 2.577087519))
            ThreePointArc((-26.25649503, 2.577087519), (-25.6695037, 2.734529206), (-25.072999573, 2.850845724))
            ThreePointArc((-25.072999573, 2.850845724), (-25.046268321, 3.00202969), (-25.018172812, 3.152966079))
            ThreePointArc((-25.018172812, 3.152966079), (-25.535770081, 3.471462192), (-26.030010787, 3.825118565))
            ThreePointArc((-26.030010787, 3.825118565), (-25.991008651, 3.999976927), (-25.950280161, 4.17444126))
            ThreePointArc((-25.950280161, 4.17444126), (-25.351538922, 4.278631636), (-24.747009613, 4.34100968))
            ThreePointArc((-24.747009613, 4.34100968), (-24.706833946, 4.489188853), (-24.665321708, 4.636999155))
            ThreePointArc((-24.665321708, 4.636999155), (-25.152285511, 5.000610157), (-25.612835037, 5.397146209))
            ThreePointArc((-25.612835037, 5.397146209), (-25.558315729, 5.567804518), (-25.502112338, 5.737915635))
            ThreePointArc((-25.502112338, 5.737915635), (-24.896441902, 5.788015821), (-24.288754725, 5.795953159))
            ThreePointArc((-24.288754725, 5.795953159), (-24.235458116, 5.939934487), (-24.18086338, 6.08342862))
            ThreePointArc((-24.18086338, 6.08342862), (-24.633272971, 6.48922693), (-25.056423242, 6.925449986))
            ThreePointArc((-25.056423242, 6.925449986), (-24.98682572, 7.090534202), (-24.915599944, 7.254922468))
            ThreePointArc((-24.915599944, 7.254922468), (-24.307876813, 7.250529086), (-23.701924509, 7.203961813))
            ThreePointArc((-23.701924509, 7.203961813), (-23.635936069, 7.342586043), (-23.568698401, 7.480608677))
            ThreePointArc((-23.568698401, 7.480608677), (-23.982911244, 7.925327045), (-24.365255303, 8.397724892))
            ThreePointArc((-24.365255303, 8.397724892), (-24.281139925, 8.555905853), (-24.195465233, 8.713247712))
            ThreePointArc((-24.195465233, 8.713247712), (-23.590582436, 8.654396135), (-22.991243776, 8.553699182))
            ThreePointArc((-22.991243776, 8.553699182), (-22.913094806, 8.685850194), (-22.833755564, 8.817290051))
            ThreePointArc((-22.833755564, 8.817290051), (-23.20643666, 9.297347867), (-23.544896097, 9.802117037))
            ThreePointArc((-23.544896097, 9.802117037), (-23.446940112, 9.952121164), (-23.347506305, 10.10114979))
            ThreePointArc((-23.347506305, 10.10114979), (-22.750334003, 9.988313856), (-22.16243451, 9.834297976))
            ThreePointArc((-22.16243451, 9.834297976), (-22.072754219, 9.958911767), (-21.981952195, 10.082710571))
            ThreePointArc((-21.981952195, 10.082710571), (-22.310100936, 10.594242691), (-22.601950676, 11.127319079))
            ThreePointArc((-22.601950676, 11.127319079), (-22.490942766, 11.267938626), (-22.378550428, 11.40745413))
            ThreePointArc((-22.378550428, 11.40745413), (-21.793896701, 11.241542328), (-21.222169795, 11.035447566))
            ThreePointArc((-21.222169795, 11.035447566), (-21.121680237, 11.151520819), (-21.020146516, 11.266681815))
            ThreePointArc((-21.020146516, 11.266681815), (-21.301120841, 11.805569683), (-21.54401108, 12.362661271))
            ThreePointArc((-21.54401108, 12.362661271), (-21.420845016, 12.492764053), (-21.296399063, 12.621643137))
            ThreePointArc((-21.296399063, 12.621643137), (-20.7289712, 12.403991291), (-20.17802009, 12.147477001))
            ThreePointArc((-20.17802009, 12.147477001), (-20.067530347, 12.254075163), (-19.956082419, 12.359671142))
            ThreePointArc((-19.956082419, 12.359671142), (-20.187620088, 12.921575951), (-20.379595218, 13.498197365))
            ThreePointArc((-20.379595218, 13.498197365), (-20.245262661, 13.616735871), (-20.109765059, 13.733940875))
            ThreePointArc((-20.109765059, 13.733940875), (-19.564131655, 13.46630139), (-19.038392276, 13.161432875))
            ThreePointArc((-19.038392276, 13.161432875), (-18.918791946, 13.25769768), (-18.798327124, 13.352878445))
            ThreePointArc((-18.798327124, 13.352878445), (-18.978563932, 13.933276067), (-19.118078281, 14.524784691))
            ThreePointArc((-19.118078281, 14.524784691), (-18.973660798, 14.630804518), (-18.828202493, 14.735391778))
            ThreePointArc((-18.828202493, 14.735391778), (-18.308756667, 14.41991953), (-17.812461963, 14.069151411))
            ThreePointArc((-17.812461963, 14.069151411), (-17.684713999, 14.154307791), (-17.556202195, 14.238307003))
            ThreePointArc((-17.556202195, 14.238307003), (-17.683686981, 14.832524418), (-17.769617262, 15.434157772))
            ThreePointArc((-17.769617262, 15.434157772), (-17.616277617, 15.526805311), (-17.462029755, 15.617932752))
            ThreePointArc((-17.462029755, 15.617932752), (-16.97295378, 15.257167737), (-16.510099624, 14.863324193))
            ThreePointArc((-16.510099624, 14.863324193), (-16.375232577, 14.936686519), (-16.239708492, 15.008827866))
            ThreePointArc((-16.239708492, 15.008827866), (-16.313414823, 15.612080784), (-16.345069176, 16.21899487))
            ThreePointArc((-16.345069176, 16.21899487), (-16.18404197, 16.297524177), (-16.022246464, 16.374458094))
            ThreePointArc((-16.022246464, 16.374458094), (-15.567478091, 15.971304981), (-15.141791113, 15.537557009))
            ThreePointArc((-15.141791113, 15.537557009), (-15.000890853, 15.598534611), (-14.859445648, 15.658237253))
            ThreePointArc((-14.859445648, 15.658237253), (-14.878780084, 16.265668636), (-14.855903647, 16.872976939))
            ThreePointArc((-14.855903647, 16.872976939), (-14.688485376, 16.936755743), (-14.520444908, 16.998876709))
            ThreePointArc((-14.520444908, 16.998876709), (-14.103645665, 16.556581449), (-13.718553247, 16.086421333))
            ThreePointArc((-13.718553247, 16.086421333), (-13.572754219, 16.134523255), (-13.426526727, 16.181306501))
            ThreePointArc((-13.426526727, 16.181306501), (-13.391333599, 16.788025669), (-13.31411056, 17.390838499))
            ThreePointArc((-13.31411056, 17.390838499), (-13.141649177, 17.439353291), (-12.96871671, 17.486161145))
            ThreePointArc((-12.96871671, 17.486161145), (-12.59324242, 17.008284839), (-12.251845099, 16.505498031))
            ThreePointArc((-12.251845099, 16.505498031), (-12.102321192, 16.540336985), (-11.952488751, 16.573824164))
            ThreePointArc((-11.952488751, 16.573824164), (-11.863051413, 17.174946172), (-11.732103525, 17.768410035))
            ThreePointArc((-11.732103525, 17.768410035), (-11.555987589, 17.801270201), (-11.379555474, 17.832388074))
            ThreePointArc((-11.379555474, 17.832388074), (-11.048429235, 17.322778302), (-10.753475741, 16.791412945))
            ThreePointArc((-10.753475741, 16.791412945), (-10.601430834, 16.812708428), (-10.449199807, 16.832629921))
            ThreePointArc((-10.449199807, 16.832629921), (-10.306238356, 17.423314887), (-10.122619935, 18.002651561))
            ThreePointArc((-10.122619935, 18.002651561), (-9.944267428, 18.019592531), (-9.765756192, 18.034769879))
            ThreePointArc((-9.765756192, 18.034769879), (-9.481644037, 17.497529719), (-9.235509162, 16.941864056))
            ThreePointArc((-9.235509162, 16.941864056), (-9.08216743, 16.949444609), (-8.928763492, 16.95564002))
            ThreePointArc((-8.928763492, 16.95564002), (-8.73342897, 17.531132097), (-8.498618404, 18.091677103))
            ThreePointArc((-8.498618404, 18.091677103), (-8.319465315, 18.092562478), (-8.140312225, 18.091677103))
        make_face(mode=Mode.SUBTRACT)
    extrude(amount=BOSS_EXTRUDE1_DEPTH)

    # Sketch2 → Cut-Extrude1 (cut, two sides: drawn at the far end of the back side and taken through both)
    with BuildSketch(Plane(origin=(-8.22287786, 0, 0), x_dir=(0, 0, -1), z_dir=(1, 0, 0)).offset(-CUT_EXTRUDE1_DEPTH_BACK)):
        with Locations((-24.869465315, 16.516562478)):
            Circle(SKETCH2_R)
        with Locations((8.230534685, 16.516562478)):
            Circle(SKETCH2_R)
        with Locations((8.230534685, -16.583437522)):
            Circle(SKETCH2_R)
        with Locations((-24.869465315, -16.583437522)):
            Circle(SKETCH2_R)
    extrude(amount=CUT_EXTRUDE1_DEPTH + CUT_EXTRUDE1_DEPTH_BACK, mode=Mode.SUBTRACT)

    # Sketch3 → Cut-Extrude2 (cut, through all)
    with BuildSketch(Plane(origin=(-8.22287786, 0, 0), x_dir=(0, 0, -1), z_dir=(1, 0, 0))):
        Polygon((9.577843492, -21.183437522), (12.830534685, -17.930746329), (12.830534685, -21.183437522), align=None)
        Polygon((-29.469465315, -17.930746329), (-26.216774121, -21.183437522), (-29.469465315, -21.183437522), align=None)
        Polygon((-26.216774121, 21.116562478), (-29.469465315, 17.863871284), (-29.469465315, 21.116562478), align=None)
        Polygon((12.830534685, 17.863871284), (9.577843492, 21.116562478), (12.830534685, 21.116562478), align=None)
    extrude(amount=-CUT_EXTRUDE2_DEPTH, mode=Mode.SUBTRACT)

    # Sketch4 → Boss-Extrude2 (add)
    with SkipClean():  # the faces are left unmerged after this step: merging them gives an invalid solid
        with BuildSketch(Plane.ZY.offset(18.22287786)):
            Polygon((-12.830534685, 17.863871284), (-12.830534685, -17.930746329), (-9.577843492, -21.183437522), (26.216774121, -21.183437522), (29.469465315, -17.930746329), (29.469465315, 17.863871284), (26.216774121, 21.116562478), (-9.577843492, 21.116562478), align=None)
            with Locations((8.319465315, -0.033437522)):
                Circle(SKETCH4_R, mode=Mode.SUBTRACT)
            with Locations((-8.230534685, 16.516562478)):
                Circle(SKETCH4_R_2, mode=Mode.SUBTRACT)
            with Locations((-8.230534685, -16.583437522)):
                Circle(SKETCH4_R_2, mode=Mode.SUBTRACT)
            with Locations((24.869465315, -16.583437522)):
                Circle(SKETCH4_R_2, mode=Mode.SUBTRACT)
            with Locations((24.869465315, 16.516562478)):
                Circle(SKETCH4_R_2, mode=Mode.SUBTRACT)
        extrude(amount=BOSS_EXTRUDE2_DEPTH)

    # Sketch5 → Cut-Extrude3 (cut)
    with SkipClean():  # the faces are left unmerged after this step: merging them gives an invalid solid
        with BuildSketch(Plane(origin=(-8.22287786, 0, 0), x_dir=(0, 0, -1), z_dir=(1, 0, 0))):
            with Locations((-24.869465315, 16.516562478)):
                Circle(SKETCH5_R)
            with Locations((8.230534685, -16.583437522)):
                Circle(SKETCH5_R)
        extrude(amount=-CUT_EXTRUDE3_DEPTH, mode=Mode.SUBTRACT)

    # Sketch6 → Cut-Extrude4 (cut, through all)
    with SkipClean():  # the faces are left unmerged after this step: merging them gives an invalid solid
        with BuildSketch(Plane(origin=(-8.22287786, 0, 0), x_dir=(0, 0, -1), z_dir=(1, 0, 0))):
            with Locations((-8.319465315, -0.033437522)):
                Circle(SKETCH6_R)
        extrude(amount=-CUT_EXTRUDE4_DEPTH, mode=Mode.SUBTRACT)


solid = part.part
